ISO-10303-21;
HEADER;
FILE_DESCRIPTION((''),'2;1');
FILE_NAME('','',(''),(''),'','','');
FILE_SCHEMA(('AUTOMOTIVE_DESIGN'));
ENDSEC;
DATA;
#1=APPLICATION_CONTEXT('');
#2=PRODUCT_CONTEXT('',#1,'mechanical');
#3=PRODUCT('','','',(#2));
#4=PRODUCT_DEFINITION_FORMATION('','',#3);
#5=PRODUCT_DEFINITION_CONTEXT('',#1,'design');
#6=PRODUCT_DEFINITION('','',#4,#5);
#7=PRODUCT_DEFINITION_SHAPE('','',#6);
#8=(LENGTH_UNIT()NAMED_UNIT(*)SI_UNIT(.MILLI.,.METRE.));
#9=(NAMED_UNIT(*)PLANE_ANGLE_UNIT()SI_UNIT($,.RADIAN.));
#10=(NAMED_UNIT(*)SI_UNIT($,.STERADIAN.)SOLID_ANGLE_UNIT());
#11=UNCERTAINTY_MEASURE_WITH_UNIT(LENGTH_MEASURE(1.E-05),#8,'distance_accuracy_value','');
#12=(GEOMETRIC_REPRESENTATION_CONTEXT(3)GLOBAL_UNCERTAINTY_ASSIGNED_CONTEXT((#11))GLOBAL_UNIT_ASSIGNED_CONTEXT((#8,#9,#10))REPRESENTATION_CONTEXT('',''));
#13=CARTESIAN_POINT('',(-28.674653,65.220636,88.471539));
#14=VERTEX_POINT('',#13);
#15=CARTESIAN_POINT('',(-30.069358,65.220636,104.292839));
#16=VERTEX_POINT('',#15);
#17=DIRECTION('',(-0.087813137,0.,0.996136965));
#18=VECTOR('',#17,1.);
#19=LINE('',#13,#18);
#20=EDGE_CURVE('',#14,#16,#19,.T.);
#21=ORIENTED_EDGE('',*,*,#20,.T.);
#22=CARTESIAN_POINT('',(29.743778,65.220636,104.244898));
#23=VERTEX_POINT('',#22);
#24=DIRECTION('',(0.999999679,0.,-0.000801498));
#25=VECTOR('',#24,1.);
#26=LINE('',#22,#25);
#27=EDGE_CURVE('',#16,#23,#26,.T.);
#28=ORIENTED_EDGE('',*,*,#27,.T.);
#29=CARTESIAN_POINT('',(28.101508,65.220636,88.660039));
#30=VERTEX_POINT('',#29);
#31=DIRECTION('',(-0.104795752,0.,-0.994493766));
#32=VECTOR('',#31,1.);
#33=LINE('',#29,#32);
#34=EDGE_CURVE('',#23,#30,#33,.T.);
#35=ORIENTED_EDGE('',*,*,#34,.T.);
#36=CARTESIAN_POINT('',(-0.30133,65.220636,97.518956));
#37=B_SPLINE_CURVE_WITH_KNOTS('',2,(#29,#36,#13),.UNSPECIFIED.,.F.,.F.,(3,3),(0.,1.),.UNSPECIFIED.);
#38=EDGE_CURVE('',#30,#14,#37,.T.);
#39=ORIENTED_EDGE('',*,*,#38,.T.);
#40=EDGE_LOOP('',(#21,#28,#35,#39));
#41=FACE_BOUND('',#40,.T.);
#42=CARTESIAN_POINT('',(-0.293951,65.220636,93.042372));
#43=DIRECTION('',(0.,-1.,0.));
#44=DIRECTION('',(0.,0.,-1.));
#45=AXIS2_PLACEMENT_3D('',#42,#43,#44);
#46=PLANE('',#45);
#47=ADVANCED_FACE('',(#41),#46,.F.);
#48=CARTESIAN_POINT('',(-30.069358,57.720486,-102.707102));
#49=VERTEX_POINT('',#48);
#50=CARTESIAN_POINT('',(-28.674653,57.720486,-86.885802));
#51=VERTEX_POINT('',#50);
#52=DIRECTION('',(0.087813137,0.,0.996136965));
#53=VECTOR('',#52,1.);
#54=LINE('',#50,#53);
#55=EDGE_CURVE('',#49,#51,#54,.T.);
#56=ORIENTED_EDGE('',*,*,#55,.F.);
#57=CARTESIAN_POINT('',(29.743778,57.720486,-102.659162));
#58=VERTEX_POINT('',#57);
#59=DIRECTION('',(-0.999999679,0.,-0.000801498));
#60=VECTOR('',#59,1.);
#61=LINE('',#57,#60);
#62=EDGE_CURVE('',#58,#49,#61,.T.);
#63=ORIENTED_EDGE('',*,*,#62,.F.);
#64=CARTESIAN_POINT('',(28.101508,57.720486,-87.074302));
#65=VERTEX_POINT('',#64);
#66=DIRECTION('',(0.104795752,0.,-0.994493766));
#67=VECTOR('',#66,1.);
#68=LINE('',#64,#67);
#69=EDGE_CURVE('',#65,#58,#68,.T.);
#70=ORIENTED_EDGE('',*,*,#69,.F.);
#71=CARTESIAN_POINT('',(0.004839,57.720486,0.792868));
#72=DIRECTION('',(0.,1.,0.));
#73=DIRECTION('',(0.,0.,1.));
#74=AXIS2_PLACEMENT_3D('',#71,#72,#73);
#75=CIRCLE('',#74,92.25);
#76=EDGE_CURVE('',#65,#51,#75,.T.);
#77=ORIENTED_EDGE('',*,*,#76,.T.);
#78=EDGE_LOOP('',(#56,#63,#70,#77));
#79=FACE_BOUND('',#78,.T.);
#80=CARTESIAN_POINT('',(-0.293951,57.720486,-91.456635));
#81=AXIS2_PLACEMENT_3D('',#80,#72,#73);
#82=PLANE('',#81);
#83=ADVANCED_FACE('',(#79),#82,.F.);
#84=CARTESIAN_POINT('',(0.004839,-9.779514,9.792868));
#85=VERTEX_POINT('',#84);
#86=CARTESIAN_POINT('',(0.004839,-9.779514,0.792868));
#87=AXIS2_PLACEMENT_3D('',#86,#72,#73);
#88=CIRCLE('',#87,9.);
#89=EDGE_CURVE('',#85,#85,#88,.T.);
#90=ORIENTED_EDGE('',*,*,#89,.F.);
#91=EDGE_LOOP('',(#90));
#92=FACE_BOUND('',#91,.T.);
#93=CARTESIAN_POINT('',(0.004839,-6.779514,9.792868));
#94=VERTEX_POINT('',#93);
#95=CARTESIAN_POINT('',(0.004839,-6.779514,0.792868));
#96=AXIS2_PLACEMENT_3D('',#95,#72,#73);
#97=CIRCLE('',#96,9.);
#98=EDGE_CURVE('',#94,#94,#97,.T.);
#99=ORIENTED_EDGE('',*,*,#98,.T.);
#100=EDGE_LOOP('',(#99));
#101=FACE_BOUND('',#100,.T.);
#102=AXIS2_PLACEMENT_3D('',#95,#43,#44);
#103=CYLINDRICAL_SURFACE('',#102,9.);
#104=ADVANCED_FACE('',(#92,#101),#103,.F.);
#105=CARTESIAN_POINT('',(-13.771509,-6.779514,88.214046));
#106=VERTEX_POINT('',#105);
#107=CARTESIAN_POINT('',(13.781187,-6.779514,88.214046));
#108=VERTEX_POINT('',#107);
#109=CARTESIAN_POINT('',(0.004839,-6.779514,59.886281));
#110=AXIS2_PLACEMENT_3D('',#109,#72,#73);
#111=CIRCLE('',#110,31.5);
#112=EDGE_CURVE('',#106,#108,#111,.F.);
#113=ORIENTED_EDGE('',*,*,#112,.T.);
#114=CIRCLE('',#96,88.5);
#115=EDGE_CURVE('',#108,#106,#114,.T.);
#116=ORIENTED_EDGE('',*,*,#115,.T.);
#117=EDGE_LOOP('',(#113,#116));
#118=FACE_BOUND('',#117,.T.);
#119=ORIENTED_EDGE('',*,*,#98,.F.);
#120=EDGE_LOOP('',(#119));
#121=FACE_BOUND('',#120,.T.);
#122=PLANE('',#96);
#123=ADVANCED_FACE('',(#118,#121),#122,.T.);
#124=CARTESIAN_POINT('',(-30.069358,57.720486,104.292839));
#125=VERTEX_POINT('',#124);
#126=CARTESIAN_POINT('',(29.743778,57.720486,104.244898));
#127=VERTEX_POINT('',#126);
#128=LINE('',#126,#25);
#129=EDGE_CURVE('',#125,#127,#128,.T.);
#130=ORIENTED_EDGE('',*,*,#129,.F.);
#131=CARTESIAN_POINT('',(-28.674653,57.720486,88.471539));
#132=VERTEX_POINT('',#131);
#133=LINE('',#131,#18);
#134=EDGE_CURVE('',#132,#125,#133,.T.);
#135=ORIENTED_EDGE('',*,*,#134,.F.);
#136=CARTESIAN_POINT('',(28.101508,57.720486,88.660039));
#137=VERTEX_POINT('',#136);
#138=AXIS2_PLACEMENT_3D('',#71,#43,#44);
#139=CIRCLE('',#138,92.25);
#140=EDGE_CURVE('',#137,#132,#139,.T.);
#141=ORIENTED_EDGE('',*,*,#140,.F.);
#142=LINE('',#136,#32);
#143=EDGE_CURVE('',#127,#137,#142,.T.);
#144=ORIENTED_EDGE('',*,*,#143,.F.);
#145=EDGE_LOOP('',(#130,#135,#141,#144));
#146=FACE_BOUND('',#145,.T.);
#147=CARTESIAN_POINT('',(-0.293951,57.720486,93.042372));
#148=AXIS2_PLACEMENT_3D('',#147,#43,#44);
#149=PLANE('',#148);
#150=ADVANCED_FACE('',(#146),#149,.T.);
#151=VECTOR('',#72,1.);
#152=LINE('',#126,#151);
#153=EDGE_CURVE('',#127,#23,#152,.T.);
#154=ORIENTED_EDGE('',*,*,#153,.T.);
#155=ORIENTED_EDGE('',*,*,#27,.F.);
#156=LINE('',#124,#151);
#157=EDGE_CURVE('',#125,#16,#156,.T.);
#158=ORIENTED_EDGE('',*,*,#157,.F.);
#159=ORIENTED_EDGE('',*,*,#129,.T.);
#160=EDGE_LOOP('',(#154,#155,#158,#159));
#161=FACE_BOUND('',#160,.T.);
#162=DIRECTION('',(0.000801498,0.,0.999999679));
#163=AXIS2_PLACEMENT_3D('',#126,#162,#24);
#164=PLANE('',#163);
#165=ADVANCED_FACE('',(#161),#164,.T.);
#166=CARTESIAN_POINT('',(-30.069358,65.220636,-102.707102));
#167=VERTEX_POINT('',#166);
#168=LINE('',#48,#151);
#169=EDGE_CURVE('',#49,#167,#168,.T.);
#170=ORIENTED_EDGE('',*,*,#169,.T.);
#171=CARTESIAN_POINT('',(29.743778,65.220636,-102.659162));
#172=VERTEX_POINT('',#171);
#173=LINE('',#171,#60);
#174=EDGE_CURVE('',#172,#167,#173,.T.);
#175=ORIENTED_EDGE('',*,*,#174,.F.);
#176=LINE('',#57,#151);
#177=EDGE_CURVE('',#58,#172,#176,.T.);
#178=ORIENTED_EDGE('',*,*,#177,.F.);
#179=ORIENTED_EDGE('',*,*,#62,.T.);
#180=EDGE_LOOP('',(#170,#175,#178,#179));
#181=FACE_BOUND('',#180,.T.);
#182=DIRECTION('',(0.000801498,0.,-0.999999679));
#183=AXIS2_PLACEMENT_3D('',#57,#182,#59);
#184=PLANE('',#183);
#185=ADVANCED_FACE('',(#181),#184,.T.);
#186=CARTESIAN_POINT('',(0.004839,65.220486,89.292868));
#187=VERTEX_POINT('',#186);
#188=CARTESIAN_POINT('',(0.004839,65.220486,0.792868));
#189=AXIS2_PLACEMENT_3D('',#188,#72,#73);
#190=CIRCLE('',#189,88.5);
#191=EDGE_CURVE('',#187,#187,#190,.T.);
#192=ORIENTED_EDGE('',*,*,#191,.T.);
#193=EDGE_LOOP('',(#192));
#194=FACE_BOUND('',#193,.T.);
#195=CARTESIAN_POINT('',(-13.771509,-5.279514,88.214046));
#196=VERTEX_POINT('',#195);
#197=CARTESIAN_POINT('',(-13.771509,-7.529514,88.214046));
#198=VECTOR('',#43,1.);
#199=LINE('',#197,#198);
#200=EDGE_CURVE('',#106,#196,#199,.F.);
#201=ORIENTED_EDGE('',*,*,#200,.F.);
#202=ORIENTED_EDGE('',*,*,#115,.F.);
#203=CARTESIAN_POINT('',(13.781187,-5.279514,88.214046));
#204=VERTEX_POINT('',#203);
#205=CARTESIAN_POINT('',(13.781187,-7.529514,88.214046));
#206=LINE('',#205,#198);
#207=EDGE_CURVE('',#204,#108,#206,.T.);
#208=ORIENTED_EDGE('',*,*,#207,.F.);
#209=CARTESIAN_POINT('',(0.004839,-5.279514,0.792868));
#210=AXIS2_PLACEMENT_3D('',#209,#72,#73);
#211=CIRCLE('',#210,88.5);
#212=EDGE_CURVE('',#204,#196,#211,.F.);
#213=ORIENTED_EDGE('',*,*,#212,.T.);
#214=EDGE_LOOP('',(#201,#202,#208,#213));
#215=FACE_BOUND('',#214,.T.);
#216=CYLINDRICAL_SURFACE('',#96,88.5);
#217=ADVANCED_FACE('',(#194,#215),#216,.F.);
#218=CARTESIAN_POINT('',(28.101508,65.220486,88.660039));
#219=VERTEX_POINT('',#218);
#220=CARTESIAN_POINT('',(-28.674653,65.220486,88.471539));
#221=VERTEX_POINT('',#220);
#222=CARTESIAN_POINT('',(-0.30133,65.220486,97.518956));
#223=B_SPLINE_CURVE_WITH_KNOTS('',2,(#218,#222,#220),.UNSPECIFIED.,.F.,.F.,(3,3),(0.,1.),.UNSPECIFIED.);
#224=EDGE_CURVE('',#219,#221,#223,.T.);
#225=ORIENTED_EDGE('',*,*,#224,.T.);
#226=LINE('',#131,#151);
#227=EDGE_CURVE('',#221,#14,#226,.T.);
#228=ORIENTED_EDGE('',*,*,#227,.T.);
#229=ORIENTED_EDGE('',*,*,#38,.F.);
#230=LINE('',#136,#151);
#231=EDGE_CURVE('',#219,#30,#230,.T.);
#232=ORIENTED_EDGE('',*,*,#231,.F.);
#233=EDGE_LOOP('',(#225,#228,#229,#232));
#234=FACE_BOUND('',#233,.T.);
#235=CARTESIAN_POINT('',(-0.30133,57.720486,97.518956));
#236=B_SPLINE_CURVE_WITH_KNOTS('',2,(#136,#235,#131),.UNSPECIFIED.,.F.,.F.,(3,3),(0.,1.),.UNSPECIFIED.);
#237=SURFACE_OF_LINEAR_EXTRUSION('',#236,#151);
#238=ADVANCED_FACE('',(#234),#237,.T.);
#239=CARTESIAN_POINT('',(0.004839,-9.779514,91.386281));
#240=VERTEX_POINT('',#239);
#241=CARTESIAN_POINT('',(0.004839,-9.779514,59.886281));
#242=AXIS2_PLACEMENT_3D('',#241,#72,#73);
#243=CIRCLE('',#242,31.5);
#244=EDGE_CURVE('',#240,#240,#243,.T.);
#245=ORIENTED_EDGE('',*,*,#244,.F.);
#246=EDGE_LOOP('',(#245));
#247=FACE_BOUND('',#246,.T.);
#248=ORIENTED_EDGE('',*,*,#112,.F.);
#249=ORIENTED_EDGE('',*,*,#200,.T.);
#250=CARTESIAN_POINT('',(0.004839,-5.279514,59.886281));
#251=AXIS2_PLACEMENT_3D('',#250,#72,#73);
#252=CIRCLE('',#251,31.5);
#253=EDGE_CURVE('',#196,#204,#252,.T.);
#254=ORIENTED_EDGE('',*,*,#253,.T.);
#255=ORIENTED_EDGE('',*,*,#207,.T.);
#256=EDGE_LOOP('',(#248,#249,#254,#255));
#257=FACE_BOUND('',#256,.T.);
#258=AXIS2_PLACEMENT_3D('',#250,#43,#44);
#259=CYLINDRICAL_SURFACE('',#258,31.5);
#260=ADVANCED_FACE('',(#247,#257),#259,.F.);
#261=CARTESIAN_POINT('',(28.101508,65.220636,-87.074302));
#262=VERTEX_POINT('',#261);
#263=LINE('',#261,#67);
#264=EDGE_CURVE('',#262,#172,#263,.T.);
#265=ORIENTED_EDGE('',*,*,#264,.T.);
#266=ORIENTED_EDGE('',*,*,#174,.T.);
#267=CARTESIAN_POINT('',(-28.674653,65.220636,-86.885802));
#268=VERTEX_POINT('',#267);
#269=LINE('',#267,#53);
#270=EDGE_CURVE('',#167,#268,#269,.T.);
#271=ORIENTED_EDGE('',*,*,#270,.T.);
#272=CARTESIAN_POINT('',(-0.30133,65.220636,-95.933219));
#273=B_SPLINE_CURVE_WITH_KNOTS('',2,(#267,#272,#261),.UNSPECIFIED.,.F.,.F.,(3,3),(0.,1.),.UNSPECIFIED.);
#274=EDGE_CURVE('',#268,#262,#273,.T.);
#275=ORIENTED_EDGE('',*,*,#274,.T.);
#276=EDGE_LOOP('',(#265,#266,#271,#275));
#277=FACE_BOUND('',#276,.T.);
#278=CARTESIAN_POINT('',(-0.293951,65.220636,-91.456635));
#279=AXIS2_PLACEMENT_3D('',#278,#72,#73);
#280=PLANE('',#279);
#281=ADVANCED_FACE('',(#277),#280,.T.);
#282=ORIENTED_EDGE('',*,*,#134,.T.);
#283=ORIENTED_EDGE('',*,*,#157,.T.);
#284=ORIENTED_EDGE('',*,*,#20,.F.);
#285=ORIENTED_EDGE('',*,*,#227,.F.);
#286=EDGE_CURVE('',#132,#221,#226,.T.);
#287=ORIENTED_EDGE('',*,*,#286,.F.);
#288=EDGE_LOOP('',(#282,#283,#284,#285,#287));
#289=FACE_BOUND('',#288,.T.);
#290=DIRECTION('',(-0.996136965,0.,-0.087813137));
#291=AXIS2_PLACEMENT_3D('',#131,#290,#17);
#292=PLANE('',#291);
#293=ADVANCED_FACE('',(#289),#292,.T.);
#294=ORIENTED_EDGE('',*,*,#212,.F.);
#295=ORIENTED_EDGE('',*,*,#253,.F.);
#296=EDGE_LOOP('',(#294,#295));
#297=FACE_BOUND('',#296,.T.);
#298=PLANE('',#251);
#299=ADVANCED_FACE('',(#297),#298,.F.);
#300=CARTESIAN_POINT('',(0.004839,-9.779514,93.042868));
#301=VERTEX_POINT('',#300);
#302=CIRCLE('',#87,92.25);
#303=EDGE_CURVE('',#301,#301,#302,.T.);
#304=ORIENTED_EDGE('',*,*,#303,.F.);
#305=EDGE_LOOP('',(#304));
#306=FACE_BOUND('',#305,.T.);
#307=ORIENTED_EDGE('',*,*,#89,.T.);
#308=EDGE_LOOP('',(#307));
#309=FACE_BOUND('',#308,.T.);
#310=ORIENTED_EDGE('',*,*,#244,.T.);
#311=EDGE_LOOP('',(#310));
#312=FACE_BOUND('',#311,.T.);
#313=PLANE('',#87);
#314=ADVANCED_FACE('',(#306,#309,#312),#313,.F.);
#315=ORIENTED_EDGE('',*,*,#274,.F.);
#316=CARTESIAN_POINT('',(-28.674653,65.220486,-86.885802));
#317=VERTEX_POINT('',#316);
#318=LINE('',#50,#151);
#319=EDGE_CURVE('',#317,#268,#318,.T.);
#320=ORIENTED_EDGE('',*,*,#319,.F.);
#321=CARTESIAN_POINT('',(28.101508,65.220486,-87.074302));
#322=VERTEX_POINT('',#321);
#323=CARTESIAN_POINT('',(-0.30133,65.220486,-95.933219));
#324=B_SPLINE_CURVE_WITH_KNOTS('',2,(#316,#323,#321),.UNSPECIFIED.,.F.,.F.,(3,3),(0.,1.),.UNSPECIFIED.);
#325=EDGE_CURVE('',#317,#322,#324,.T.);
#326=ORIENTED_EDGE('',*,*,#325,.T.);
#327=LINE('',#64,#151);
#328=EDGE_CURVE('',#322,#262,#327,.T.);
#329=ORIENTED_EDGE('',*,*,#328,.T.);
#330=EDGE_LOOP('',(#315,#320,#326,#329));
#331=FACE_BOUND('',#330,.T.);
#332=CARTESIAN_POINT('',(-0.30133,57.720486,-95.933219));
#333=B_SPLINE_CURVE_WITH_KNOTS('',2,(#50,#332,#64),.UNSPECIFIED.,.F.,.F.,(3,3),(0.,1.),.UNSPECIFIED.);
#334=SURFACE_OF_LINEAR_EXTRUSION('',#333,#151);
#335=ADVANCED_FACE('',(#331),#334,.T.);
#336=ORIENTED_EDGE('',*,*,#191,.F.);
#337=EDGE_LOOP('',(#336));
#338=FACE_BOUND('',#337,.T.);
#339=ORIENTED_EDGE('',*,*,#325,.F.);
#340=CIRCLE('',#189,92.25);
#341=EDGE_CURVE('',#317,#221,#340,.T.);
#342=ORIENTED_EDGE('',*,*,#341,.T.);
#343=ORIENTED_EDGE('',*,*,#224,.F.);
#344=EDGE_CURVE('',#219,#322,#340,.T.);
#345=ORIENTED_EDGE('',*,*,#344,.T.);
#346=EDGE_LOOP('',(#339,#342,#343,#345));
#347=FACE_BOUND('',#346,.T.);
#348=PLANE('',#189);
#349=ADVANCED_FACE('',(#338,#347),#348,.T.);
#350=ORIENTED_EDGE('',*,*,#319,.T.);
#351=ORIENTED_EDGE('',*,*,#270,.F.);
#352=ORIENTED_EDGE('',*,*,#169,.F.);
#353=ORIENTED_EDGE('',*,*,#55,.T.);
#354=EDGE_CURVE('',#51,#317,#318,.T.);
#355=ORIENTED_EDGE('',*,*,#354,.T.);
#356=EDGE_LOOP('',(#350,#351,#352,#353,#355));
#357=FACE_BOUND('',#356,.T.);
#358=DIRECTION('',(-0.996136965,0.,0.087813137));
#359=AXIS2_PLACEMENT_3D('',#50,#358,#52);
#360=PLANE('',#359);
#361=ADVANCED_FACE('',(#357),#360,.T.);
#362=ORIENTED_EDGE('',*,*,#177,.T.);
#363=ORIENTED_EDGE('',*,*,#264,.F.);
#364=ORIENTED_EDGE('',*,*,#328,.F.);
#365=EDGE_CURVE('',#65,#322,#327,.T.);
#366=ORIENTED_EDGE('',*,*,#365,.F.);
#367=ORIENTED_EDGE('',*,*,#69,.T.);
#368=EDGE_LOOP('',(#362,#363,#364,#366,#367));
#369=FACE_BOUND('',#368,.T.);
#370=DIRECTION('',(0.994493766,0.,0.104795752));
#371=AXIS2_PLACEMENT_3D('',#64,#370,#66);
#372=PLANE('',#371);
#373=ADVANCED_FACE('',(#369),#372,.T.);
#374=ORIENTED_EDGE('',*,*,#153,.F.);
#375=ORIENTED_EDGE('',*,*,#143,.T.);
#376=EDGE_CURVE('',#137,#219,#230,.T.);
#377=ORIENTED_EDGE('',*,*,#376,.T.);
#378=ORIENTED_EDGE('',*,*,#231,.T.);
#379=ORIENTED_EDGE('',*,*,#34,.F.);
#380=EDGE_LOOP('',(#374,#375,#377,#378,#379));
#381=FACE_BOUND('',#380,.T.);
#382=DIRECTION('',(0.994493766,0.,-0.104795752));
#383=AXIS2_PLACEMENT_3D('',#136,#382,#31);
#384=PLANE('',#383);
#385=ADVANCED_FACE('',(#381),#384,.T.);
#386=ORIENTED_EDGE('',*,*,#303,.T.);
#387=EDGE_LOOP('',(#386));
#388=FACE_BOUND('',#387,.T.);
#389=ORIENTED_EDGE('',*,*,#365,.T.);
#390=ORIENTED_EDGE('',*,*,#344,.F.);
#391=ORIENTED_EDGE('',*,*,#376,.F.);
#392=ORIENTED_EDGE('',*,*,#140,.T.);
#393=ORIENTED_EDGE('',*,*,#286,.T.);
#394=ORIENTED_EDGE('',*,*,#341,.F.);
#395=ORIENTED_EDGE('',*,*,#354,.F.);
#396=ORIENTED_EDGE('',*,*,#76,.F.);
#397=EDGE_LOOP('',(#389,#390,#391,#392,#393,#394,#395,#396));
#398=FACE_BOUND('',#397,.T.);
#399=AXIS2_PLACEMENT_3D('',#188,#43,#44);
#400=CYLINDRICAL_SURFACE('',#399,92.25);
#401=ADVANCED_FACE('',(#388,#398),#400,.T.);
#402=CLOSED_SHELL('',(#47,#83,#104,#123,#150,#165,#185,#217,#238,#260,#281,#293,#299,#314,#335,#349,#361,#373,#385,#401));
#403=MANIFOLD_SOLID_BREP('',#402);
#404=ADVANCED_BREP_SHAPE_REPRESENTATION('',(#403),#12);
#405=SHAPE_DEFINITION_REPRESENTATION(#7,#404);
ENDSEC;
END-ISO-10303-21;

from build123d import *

# Parameters (mm, degrees)
SKETCH2_R           = 61.5
BOSS_EXTRUDE1_DEPTH = 50
SKETCH6_R           = 59
CUT_EXTRUDE1_DEPTH  = 48
SKETCH7_R           = 6
CUT_EXTRUDE4_DEPTH  = 2
SKETCH9_R           = 21
CUT_EXTRUDE5_DEPTH  = 3
BOSS_EXTRUDE2_START = -5
BOSS_EXTRUDE2_DEPTH = 5.0001
SCALE2_SCALE        = 1.5


# Read off the part's stored shape, not the designer's step: Boss-Extrude2
with BuildPart() as part:
    # Sketch2 → Boss-Extrude1 (new body)
    with BuildSketch(Plane(origin=(0, 0, 0), x_dir=(1, 0, 0), z_dir=(0, 1, 0))):
        with Locations(Location((0, 0, 0), (0, 0, 270))):
            Circle(SKETCH2_R)
    extrude(amount=BOSS_EXTRUDE1_DEPTH)

    # Sketch6 → Cut-Extrude1 (cut)
    with BuildSketch(Plane(origin=(0, 50, 0), x_dir=(1, 0, 0), z_dir=(0, 1, 0))):
        with Locations(Location((0, 0, 0), (0, 0, 270))):
            Circle(SKETCH6_R)
    extrude(amount=-CUT_EXTRUDE1_DEPTH, mode=Mode.SUBTRACT)

    # Sketch7 → Cut-Extrude4 (cut)
    with BuildSketch(Plane(origin=(0, 0, 0), x_dir=(1, 0, 0), z_dir=(0, 1, 0))):
        with Locations(Location((0, 0, 0), (0, 0, 270))):
            Circle(SKETCH7_R)
    extrude(amount=CUT_EXTRUDE4_DEPTH, mode=Mode.SUBTRACT)

    # Sketch9 → Cut-Extrude5 (cut)
    with BuildSketch(Plane(origin=(0, 0, 0), x_dir=(1, 0, 0), z_dir=(0, 1, 0))):
        with Locations(Location((0, -39.395608547, 0), (0, 0, 244.065435775))):
            Circle(SKETCH9_R)
    extrude(amount=CUT_EXTRUDE5_DEPTH, mode=Mode.SUBTRACT)

    # Boss-Extrude2 outline → Boss-Extrude2 (add)
    with BuildSketch(Plane(origin=(0, 50, 0), x_dir=(1, 0, 0), z_dir=(0, 1, 0)).offset(BOSS_EXTRUDE2_START)):
        with BuildLine():
            ThreePointArc((18.731112888, -58.578113745), (-0.20418242, -61.499661052), (-19.119661096, -58.452446994))
            Line((-19.119661096, -58.452446994), (-20.049464932, -68.999980107))
            Line((-20.049464932, -68.999980107), (19.825959412, -68.968020016))
            Line((19.825959412, -68.968020016), (18.731112888, -58.578113745))
        make_face()
        with BuildLine():
            Line((-20.049464932, 68.999980107), (-19.119661096, 58.452446994))
            ThreePointArc((-19.119661096, 58.452446994), (-0.20418242, 61.499661052), (18.731112888, 58.578113745))
            Line((18.731112888, 58.578113745), (19.825959412, 68.968020016))
            Line((19.825959412, 68.968020016), (-20.049464932, 68.999980107))
        make_face()
    extrude(amount=BOSS_EXTRUDE2_DEPTH)


with BuildPart() as part_1:
    # Scale2: scaled about (-0.009677872, 19.559028085, -1.585736767)
    add(part.part.scale(SCALE2_SCALE).moved(Location((0.004838936, -9.779514043, 0.792868383))))


solid = part_1.part
